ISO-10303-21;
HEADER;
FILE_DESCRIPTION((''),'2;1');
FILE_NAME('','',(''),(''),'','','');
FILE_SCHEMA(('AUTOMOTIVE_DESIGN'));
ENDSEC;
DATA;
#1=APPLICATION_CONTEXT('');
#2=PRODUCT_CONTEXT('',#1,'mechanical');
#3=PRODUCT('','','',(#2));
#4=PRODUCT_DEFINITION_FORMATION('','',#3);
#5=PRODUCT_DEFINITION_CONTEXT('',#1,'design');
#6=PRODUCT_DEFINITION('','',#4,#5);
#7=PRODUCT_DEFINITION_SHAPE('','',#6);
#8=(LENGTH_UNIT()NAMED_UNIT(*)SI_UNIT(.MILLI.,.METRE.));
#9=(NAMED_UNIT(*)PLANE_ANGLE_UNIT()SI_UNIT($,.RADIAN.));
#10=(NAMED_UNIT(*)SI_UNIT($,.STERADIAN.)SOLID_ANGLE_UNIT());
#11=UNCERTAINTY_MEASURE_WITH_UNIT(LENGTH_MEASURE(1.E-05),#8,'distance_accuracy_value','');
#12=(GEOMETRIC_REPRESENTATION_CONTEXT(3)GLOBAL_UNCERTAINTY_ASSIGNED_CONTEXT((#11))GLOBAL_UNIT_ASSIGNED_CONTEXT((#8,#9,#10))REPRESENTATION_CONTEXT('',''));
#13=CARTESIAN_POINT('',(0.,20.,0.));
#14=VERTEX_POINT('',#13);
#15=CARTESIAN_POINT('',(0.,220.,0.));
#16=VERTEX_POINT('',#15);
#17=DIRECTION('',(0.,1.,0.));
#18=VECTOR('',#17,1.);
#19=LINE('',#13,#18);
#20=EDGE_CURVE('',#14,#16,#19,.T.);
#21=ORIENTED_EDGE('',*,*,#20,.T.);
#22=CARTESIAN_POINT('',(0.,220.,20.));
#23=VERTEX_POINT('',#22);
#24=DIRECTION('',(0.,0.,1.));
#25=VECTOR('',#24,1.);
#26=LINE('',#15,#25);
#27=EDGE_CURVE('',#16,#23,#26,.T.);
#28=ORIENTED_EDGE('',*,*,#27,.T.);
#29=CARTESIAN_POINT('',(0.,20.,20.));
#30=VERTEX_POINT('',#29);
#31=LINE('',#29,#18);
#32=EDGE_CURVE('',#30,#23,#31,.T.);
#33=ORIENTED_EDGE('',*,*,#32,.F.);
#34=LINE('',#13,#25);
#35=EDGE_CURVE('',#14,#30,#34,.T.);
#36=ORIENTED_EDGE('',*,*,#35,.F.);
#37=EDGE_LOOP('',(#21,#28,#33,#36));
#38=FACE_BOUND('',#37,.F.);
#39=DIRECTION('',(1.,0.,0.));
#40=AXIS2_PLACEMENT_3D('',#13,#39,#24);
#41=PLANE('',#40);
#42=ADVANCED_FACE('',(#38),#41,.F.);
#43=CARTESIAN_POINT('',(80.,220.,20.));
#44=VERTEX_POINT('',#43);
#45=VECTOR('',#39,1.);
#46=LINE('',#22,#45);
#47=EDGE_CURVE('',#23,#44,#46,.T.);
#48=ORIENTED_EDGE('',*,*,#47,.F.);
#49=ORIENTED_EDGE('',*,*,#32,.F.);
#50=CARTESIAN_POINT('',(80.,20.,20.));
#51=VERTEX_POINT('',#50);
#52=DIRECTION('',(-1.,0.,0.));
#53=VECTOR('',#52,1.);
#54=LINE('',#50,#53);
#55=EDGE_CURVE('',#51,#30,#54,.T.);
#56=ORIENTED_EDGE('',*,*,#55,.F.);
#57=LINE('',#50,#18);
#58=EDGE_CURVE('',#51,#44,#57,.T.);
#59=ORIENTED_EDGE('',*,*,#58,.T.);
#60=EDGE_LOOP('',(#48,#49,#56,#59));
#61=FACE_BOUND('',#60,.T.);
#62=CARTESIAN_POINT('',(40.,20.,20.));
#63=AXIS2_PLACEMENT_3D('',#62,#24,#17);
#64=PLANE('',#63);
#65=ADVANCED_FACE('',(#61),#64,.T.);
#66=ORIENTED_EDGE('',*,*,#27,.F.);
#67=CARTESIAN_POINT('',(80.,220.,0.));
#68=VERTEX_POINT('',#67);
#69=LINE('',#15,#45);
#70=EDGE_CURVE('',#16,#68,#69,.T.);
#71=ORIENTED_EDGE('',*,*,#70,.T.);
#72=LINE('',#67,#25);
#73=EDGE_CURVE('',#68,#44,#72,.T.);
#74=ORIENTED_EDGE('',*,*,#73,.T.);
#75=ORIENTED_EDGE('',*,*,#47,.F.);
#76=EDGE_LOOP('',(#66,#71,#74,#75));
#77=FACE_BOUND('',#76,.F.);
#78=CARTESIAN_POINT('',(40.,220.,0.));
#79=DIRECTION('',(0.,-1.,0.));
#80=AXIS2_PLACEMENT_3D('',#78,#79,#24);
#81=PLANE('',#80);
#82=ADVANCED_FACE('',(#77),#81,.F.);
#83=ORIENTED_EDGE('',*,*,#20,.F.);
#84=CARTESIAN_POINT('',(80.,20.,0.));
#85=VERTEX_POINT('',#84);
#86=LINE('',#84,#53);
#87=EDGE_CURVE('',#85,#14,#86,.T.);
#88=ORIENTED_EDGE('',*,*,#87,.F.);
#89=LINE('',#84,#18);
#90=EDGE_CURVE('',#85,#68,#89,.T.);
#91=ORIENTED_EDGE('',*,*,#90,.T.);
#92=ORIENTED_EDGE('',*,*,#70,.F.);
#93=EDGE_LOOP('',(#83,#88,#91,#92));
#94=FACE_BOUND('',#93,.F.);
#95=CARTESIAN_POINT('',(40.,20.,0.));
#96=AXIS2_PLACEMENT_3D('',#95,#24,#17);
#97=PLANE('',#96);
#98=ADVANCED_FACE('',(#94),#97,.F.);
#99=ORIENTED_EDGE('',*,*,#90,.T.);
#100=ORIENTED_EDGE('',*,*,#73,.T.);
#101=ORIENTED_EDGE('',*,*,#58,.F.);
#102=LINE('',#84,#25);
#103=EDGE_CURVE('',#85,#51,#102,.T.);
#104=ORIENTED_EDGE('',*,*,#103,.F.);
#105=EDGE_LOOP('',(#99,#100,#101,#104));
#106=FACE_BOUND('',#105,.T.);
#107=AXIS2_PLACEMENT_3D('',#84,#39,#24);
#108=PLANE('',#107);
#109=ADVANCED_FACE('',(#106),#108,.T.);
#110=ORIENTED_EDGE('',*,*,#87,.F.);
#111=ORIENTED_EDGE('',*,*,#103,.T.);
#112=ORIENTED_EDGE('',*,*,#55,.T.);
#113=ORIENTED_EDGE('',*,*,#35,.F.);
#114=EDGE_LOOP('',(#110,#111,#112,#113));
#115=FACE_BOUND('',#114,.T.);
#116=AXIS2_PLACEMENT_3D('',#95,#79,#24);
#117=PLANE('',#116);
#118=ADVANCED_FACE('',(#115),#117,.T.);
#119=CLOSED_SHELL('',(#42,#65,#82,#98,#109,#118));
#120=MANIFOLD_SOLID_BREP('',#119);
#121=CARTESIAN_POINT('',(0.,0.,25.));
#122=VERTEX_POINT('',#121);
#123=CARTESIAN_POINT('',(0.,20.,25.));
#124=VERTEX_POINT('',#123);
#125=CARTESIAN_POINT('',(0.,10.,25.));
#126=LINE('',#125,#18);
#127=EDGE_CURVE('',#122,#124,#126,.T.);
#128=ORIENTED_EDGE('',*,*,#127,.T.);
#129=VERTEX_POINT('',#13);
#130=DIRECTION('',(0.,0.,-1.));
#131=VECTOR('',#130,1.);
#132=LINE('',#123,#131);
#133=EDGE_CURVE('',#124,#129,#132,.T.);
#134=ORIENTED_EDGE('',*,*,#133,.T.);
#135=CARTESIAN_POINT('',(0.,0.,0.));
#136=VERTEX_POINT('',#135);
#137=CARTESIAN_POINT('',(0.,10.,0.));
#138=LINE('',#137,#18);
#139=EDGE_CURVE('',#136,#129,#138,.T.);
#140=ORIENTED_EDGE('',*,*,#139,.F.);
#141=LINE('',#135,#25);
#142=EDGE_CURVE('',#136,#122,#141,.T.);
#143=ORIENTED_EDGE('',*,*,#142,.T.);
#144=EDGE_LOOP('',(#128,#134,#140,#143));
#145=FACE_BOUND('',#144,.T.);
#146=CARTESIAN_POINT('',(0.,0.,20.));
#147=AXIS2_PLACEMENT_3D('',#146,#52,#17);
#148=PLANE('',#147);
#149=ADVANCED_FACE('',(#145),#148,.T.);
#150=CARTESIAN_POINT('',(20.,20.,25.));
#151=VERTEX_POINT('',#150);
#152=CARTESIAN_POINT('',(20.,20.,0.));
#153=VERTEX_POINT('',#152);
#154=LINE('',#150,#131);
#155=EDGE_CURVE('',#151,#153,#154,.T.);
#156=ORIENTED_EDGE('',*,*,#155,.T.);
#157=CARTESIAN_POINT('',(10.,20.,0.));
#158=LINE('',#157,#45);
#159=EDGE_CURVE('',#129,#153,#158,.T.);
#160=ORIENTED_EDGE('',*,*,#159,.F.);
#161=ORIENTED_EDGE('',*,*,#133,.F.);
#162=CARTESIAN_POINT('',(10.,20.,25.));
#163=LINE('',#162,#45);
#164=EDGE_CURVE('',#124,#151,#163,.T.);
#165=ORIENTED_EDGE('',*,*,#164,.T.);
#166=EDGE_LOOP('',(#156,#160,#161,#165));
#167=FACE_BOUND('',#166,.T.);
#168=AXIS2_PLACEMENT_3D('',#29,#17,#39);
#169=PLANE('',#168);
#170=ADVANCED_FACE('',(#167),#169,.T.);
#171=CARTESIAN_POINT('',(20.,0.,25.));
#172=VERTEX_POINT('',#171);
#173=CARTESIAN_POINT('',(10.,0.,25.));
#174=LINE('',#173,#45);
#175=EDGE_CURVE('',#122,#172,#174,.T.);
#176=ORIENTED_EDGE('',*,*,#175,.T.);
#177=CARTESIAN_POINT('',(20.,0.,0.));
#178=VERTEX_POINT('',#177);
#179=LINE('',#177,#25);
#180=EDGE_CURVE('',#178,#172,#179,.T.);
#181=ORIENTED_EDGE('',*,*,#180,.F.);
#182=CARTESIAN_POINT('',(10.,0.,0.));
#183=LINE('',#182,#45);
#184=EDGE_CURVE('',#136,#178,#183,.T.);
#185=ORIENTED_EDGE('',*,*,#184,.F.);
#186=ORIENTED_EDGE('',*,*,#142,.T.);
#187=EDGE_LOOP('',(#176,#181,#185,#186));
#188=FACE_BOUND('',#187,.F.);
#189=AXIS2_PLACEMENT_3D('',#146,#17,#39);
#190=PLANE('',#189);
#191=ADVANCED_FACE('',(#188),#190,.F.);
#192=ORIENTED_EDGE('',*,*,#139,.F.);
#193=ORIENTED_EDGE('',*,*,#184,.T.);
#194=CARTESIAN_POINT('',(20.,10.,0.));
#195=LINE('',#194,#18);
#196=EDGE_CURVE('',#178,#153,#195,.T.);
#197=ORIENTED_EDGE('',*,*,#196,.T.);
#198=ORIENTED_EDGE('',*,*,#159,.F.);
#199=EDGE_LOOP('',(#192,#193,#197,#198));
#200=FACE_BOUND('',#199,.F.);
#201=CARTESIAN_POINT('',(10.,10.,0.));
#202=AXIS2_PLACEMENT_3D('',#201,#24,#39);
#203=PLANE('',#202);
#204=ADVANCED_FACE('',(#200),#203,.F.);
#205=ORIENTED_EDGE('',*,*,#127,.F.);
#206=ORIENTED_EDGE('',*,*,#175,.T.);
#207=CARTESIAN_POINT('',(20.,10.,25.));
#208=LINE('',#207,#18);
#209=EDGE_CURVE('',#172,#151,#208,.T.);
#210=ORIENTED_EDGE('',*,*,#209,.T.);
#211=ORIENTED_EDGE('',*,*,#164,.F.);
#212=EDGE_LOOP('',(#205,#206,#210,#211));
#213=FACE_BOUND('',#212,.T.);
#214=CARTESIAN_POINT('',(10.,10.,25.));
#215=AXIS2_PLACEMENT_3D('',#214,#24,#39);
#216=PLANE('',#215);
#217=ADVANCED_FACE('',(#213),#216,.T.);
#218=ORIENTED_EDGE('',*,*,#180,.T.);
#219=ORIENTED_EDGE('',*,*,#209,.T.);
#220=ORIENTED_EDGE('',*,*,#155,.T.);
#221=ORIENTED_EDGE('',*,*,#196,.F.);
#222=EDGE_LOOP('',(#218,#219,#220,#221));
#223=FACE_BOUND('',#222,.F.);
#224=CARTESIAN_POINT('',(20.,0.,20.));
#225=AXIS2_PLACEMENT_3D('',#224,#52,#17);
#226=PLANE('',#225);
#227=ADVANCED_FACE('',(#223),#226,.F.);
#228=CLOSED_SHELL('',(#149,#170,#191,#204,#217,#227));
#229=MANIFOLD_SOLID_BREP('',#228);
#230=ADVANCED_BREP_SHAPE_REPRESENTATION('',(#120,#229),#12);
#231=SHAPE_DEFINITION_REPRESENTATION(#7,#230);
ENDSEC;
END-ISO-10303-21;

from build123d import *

# Parameters (mm, degrees)
F0_W     = 20
F0_H     = 20
F1_DEPTH = 20
F2_DEPTH = 200
F3_DEPTH = 5
F4_DEPTH = 20
F5_DEPTH = 40


with BuildPart() as f1:
    # F0 (on Top) → F1 (new body)
    with BuildSketch(Plane.XY):
        with Locations((10, 10)):
            Rectangle(F0_W, F0_H)
    extrude(amount=F1_DEPTH)


with BuildPart() as f2:
    # F2 (new): a face of the model
    f2_faces = [f1.part.faces().sort_by_distance(p)[0] for p in [
        (10, 20, 10),
    ]]
    extrude(f2_faces, amount=F2_DEPTH)

    # F4 (add): a face of the model
    f4_faces = [f2.faces().sort_by_distance(p)[0] for p in [
        (20, 120, 10),
    ]]
    extrude(f4_faces, amount=F4_DEPTH)

    # F5 (add): a face of the model
    f5_faces = [f2.faces().sort_by_distance(p)[0] for p in [
        (40, 120, 10),
    ]]
    extrude(f5_faces, amount=F5_DEPTH)


with BuildPart() as f1_1:
    add(f1.part)

    # F3 (add): a face of the model
    f3_faces = [f1_1.faces().sort_by_distance(p)[0] for p in [
        (10, 10, 20),
    ]]
    extrude(f3_faces, amount=F3_DEPTH)


solid = Compound([f2.part, f1_1.part])
